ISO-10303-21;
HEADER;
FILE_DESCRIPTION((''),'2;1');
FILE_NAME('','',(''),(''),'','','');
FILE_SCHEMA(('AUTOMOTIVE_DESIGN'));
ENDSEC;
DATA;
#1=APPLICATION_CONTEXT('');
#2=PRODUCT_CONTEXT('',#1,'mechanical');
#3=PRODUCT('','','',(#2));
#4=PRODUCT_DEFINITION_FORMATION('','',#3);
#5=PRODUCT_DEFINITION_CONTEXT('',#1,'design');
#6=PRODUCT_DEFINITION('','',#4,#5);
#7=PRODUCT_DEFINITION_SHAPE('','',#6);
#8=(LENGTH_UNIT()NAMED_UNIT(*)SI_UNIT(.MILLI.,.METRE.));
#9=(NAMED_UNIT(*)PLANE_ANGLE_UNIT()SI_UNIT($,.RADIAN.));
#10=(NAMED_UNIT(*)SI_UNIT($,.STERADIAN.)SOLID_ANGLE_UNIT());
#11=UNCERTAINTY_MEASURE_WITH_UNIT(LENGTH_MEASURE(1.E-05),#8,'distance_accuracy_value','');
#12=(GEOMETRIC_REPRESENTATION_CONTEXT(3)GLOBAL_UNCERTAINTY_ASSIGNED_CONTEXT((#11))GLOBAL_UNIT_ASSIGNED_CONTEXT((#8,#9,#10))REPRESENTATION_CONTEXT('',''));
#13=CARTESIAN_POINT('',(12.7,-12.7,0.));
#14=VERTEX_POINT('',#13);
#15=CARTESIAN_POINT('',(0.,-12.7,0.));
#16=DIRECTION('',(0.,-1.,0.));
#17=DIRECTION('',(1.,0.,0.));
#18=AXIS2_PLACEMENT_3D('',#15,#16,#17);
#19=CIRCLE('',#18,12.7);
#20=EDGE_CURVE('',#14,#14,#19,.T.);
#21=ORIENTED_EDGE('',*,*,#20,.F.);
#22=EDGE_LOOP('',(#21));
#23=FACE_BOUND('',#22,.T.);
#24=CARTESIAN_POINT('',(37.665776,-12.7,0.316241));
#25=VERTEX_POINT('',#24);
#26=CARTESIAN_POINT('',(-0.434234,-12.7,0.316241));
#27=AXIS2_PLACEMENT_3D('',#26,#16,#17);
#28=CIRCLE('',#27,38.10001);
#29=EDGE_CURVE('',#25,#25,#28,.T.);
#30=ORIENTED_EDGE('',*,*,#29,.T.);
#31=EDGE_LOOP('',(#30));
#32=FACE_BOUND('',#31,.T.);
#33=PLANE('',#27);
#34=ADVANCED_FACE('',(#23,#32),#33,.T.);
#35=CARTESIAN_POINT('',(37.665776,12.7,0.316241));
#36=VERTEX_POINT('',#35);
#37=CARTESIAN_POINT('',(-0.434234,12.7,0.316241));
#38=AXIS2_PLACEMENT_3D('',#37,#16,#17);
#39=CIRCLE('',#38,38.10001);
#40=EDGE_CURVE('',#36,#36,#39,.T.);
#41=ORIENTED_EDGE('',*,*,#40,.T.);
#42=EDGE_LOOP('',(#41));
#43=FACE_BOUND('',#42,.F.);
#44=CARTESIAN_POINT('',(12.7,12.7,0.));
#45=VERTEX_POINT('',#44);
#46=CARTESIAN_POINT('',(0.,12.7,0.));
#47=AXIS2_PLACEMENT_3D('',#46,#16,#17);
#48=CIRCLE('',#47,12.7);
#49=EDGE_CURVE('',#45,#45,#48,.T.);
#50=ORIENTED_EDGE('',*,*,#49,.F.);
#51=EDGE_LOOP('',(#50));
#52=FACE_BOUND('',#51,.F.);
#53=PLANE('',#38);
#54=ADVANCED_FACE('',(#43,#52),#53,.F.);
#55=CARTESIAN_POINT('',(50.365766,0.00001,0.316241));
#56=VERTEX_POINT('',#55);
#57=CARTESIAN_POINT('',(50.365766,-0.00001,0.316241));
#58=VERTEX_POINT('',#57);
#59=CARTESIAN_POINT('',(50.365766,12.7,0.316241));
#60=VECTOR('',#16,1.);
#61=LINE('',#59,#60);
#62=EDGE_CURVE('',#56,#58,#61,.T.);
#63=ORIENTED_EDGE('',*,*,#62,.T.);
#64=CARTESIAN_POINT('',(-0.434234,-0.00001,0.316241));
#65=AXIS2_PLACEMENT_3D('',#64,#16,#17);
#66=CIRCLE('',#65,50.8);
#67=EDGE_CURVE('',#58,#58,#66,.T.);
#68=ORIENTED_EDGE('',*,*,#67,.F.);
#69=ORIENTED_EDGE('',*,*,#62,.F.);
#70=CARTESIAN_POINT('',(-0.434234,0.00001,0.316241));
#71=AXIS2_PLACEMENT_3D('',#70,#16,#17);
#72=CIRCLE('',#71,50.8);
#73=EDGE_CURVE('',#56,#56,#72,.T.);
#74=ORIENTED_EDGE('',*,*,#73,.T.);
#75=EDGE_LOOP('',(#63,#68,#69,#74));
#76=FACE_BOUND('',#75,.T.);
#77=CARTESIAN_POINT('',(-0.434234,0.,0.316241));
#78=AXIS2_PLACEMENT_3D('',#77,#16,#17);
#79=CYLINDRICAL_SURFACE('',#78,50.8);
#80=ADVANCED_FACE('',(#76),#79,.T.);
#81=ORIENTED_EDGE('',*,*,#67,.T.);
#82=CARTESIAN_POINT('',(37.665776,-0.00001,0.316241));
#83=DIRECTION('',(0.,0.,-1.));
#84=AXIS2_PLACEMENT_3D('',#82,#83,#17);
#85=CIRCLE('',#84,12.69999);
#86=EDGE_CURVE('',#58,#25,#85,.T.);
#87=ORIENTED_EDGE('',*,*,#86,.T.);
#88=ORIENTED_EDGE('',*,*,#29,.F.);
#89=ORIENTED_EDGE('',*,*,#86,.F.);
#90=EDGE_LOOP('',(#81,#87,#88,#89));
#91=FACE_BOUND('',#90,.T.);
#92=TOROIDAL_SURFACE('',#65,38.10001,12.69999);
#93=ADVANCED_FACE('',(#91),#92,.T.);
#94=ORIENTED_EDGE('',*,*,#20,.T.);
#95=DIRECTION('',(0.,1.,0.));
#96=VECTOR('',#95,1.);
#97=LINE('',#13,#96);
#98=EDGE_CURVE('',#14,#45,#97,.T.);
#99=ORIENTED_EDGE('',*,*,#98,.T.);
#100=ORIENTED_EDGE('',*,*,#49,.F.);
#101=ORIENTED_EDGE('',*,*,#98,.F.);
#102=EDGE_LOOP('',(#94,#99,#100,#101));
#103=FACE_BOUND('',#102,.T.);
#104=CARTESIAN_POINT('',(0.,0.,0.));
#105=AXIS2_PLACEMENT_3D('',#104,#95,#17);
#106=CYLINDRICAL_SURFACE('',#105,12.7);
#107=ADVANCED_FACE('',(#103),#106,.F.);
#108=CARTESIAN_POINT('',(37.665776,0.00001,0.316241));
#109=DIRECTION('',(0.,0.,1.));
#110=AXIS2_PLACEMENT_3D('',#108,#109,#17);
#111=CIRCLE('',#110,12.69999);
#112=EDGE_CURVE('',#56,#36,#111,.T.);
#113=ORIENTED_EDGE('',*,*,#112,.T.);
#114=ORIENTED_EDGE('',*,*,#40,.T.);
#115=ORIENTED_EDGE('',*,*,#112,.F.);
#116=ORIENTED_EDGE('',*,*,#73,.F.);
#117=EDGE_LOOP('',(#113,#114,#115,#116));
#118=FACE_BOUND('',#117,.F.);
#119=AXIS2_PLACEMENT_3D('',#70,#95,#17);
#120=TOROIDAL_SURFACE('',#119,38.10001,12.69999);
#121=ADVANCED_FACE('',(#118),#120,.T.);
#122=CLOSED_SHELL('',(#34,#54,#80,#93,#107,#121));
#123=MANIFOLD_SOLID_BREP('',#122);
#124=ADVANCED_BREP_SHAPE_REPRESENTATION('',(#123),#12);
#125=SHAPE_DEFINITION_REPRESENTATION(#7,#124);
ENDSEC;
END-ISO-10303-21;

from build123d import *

# Parameters (mm, degrees)
F0_R     = 50.8
F0_R_2   = 25.4
F0_R_3   = 12.7
F1_DEPTH = 12.7
F2_R     = 12.69999


# Not quite as in the source:
# - a fillet or chamfer is up to 0.001 mm smaller than in the source, because OpenCascade refuses the exact size


with BuildPart() as f1:
    # F0 (on Front) → F1 (new body, symmetric)
    with BuildSketch(Plane.XZ):
        with Locations((-0.4342335526, 0.3162413696)):
            Circle(F0_R)
        Circle(F0_R_2, mode=Mode.SUBTRACT)
        Circle(F0_R_2)
        Circle(F0_R_3, mode=Mode.SUBTRACT)
    extrude(amount=F1_DEPTH, both=True)

    # F2 (radius 12.7 in the source; OpenCascade refuses exactly that, so slightly less here)
    f2_edges = [f1.edges().sort_by_distance(p)[0] for p in [
        (-51.234234, 12.7, 0.316241),
        (-51.234234, -12.7, 0.316241),
    ]]
    fillet(f2_edges, radius=F2_R)


solid = f1.part
